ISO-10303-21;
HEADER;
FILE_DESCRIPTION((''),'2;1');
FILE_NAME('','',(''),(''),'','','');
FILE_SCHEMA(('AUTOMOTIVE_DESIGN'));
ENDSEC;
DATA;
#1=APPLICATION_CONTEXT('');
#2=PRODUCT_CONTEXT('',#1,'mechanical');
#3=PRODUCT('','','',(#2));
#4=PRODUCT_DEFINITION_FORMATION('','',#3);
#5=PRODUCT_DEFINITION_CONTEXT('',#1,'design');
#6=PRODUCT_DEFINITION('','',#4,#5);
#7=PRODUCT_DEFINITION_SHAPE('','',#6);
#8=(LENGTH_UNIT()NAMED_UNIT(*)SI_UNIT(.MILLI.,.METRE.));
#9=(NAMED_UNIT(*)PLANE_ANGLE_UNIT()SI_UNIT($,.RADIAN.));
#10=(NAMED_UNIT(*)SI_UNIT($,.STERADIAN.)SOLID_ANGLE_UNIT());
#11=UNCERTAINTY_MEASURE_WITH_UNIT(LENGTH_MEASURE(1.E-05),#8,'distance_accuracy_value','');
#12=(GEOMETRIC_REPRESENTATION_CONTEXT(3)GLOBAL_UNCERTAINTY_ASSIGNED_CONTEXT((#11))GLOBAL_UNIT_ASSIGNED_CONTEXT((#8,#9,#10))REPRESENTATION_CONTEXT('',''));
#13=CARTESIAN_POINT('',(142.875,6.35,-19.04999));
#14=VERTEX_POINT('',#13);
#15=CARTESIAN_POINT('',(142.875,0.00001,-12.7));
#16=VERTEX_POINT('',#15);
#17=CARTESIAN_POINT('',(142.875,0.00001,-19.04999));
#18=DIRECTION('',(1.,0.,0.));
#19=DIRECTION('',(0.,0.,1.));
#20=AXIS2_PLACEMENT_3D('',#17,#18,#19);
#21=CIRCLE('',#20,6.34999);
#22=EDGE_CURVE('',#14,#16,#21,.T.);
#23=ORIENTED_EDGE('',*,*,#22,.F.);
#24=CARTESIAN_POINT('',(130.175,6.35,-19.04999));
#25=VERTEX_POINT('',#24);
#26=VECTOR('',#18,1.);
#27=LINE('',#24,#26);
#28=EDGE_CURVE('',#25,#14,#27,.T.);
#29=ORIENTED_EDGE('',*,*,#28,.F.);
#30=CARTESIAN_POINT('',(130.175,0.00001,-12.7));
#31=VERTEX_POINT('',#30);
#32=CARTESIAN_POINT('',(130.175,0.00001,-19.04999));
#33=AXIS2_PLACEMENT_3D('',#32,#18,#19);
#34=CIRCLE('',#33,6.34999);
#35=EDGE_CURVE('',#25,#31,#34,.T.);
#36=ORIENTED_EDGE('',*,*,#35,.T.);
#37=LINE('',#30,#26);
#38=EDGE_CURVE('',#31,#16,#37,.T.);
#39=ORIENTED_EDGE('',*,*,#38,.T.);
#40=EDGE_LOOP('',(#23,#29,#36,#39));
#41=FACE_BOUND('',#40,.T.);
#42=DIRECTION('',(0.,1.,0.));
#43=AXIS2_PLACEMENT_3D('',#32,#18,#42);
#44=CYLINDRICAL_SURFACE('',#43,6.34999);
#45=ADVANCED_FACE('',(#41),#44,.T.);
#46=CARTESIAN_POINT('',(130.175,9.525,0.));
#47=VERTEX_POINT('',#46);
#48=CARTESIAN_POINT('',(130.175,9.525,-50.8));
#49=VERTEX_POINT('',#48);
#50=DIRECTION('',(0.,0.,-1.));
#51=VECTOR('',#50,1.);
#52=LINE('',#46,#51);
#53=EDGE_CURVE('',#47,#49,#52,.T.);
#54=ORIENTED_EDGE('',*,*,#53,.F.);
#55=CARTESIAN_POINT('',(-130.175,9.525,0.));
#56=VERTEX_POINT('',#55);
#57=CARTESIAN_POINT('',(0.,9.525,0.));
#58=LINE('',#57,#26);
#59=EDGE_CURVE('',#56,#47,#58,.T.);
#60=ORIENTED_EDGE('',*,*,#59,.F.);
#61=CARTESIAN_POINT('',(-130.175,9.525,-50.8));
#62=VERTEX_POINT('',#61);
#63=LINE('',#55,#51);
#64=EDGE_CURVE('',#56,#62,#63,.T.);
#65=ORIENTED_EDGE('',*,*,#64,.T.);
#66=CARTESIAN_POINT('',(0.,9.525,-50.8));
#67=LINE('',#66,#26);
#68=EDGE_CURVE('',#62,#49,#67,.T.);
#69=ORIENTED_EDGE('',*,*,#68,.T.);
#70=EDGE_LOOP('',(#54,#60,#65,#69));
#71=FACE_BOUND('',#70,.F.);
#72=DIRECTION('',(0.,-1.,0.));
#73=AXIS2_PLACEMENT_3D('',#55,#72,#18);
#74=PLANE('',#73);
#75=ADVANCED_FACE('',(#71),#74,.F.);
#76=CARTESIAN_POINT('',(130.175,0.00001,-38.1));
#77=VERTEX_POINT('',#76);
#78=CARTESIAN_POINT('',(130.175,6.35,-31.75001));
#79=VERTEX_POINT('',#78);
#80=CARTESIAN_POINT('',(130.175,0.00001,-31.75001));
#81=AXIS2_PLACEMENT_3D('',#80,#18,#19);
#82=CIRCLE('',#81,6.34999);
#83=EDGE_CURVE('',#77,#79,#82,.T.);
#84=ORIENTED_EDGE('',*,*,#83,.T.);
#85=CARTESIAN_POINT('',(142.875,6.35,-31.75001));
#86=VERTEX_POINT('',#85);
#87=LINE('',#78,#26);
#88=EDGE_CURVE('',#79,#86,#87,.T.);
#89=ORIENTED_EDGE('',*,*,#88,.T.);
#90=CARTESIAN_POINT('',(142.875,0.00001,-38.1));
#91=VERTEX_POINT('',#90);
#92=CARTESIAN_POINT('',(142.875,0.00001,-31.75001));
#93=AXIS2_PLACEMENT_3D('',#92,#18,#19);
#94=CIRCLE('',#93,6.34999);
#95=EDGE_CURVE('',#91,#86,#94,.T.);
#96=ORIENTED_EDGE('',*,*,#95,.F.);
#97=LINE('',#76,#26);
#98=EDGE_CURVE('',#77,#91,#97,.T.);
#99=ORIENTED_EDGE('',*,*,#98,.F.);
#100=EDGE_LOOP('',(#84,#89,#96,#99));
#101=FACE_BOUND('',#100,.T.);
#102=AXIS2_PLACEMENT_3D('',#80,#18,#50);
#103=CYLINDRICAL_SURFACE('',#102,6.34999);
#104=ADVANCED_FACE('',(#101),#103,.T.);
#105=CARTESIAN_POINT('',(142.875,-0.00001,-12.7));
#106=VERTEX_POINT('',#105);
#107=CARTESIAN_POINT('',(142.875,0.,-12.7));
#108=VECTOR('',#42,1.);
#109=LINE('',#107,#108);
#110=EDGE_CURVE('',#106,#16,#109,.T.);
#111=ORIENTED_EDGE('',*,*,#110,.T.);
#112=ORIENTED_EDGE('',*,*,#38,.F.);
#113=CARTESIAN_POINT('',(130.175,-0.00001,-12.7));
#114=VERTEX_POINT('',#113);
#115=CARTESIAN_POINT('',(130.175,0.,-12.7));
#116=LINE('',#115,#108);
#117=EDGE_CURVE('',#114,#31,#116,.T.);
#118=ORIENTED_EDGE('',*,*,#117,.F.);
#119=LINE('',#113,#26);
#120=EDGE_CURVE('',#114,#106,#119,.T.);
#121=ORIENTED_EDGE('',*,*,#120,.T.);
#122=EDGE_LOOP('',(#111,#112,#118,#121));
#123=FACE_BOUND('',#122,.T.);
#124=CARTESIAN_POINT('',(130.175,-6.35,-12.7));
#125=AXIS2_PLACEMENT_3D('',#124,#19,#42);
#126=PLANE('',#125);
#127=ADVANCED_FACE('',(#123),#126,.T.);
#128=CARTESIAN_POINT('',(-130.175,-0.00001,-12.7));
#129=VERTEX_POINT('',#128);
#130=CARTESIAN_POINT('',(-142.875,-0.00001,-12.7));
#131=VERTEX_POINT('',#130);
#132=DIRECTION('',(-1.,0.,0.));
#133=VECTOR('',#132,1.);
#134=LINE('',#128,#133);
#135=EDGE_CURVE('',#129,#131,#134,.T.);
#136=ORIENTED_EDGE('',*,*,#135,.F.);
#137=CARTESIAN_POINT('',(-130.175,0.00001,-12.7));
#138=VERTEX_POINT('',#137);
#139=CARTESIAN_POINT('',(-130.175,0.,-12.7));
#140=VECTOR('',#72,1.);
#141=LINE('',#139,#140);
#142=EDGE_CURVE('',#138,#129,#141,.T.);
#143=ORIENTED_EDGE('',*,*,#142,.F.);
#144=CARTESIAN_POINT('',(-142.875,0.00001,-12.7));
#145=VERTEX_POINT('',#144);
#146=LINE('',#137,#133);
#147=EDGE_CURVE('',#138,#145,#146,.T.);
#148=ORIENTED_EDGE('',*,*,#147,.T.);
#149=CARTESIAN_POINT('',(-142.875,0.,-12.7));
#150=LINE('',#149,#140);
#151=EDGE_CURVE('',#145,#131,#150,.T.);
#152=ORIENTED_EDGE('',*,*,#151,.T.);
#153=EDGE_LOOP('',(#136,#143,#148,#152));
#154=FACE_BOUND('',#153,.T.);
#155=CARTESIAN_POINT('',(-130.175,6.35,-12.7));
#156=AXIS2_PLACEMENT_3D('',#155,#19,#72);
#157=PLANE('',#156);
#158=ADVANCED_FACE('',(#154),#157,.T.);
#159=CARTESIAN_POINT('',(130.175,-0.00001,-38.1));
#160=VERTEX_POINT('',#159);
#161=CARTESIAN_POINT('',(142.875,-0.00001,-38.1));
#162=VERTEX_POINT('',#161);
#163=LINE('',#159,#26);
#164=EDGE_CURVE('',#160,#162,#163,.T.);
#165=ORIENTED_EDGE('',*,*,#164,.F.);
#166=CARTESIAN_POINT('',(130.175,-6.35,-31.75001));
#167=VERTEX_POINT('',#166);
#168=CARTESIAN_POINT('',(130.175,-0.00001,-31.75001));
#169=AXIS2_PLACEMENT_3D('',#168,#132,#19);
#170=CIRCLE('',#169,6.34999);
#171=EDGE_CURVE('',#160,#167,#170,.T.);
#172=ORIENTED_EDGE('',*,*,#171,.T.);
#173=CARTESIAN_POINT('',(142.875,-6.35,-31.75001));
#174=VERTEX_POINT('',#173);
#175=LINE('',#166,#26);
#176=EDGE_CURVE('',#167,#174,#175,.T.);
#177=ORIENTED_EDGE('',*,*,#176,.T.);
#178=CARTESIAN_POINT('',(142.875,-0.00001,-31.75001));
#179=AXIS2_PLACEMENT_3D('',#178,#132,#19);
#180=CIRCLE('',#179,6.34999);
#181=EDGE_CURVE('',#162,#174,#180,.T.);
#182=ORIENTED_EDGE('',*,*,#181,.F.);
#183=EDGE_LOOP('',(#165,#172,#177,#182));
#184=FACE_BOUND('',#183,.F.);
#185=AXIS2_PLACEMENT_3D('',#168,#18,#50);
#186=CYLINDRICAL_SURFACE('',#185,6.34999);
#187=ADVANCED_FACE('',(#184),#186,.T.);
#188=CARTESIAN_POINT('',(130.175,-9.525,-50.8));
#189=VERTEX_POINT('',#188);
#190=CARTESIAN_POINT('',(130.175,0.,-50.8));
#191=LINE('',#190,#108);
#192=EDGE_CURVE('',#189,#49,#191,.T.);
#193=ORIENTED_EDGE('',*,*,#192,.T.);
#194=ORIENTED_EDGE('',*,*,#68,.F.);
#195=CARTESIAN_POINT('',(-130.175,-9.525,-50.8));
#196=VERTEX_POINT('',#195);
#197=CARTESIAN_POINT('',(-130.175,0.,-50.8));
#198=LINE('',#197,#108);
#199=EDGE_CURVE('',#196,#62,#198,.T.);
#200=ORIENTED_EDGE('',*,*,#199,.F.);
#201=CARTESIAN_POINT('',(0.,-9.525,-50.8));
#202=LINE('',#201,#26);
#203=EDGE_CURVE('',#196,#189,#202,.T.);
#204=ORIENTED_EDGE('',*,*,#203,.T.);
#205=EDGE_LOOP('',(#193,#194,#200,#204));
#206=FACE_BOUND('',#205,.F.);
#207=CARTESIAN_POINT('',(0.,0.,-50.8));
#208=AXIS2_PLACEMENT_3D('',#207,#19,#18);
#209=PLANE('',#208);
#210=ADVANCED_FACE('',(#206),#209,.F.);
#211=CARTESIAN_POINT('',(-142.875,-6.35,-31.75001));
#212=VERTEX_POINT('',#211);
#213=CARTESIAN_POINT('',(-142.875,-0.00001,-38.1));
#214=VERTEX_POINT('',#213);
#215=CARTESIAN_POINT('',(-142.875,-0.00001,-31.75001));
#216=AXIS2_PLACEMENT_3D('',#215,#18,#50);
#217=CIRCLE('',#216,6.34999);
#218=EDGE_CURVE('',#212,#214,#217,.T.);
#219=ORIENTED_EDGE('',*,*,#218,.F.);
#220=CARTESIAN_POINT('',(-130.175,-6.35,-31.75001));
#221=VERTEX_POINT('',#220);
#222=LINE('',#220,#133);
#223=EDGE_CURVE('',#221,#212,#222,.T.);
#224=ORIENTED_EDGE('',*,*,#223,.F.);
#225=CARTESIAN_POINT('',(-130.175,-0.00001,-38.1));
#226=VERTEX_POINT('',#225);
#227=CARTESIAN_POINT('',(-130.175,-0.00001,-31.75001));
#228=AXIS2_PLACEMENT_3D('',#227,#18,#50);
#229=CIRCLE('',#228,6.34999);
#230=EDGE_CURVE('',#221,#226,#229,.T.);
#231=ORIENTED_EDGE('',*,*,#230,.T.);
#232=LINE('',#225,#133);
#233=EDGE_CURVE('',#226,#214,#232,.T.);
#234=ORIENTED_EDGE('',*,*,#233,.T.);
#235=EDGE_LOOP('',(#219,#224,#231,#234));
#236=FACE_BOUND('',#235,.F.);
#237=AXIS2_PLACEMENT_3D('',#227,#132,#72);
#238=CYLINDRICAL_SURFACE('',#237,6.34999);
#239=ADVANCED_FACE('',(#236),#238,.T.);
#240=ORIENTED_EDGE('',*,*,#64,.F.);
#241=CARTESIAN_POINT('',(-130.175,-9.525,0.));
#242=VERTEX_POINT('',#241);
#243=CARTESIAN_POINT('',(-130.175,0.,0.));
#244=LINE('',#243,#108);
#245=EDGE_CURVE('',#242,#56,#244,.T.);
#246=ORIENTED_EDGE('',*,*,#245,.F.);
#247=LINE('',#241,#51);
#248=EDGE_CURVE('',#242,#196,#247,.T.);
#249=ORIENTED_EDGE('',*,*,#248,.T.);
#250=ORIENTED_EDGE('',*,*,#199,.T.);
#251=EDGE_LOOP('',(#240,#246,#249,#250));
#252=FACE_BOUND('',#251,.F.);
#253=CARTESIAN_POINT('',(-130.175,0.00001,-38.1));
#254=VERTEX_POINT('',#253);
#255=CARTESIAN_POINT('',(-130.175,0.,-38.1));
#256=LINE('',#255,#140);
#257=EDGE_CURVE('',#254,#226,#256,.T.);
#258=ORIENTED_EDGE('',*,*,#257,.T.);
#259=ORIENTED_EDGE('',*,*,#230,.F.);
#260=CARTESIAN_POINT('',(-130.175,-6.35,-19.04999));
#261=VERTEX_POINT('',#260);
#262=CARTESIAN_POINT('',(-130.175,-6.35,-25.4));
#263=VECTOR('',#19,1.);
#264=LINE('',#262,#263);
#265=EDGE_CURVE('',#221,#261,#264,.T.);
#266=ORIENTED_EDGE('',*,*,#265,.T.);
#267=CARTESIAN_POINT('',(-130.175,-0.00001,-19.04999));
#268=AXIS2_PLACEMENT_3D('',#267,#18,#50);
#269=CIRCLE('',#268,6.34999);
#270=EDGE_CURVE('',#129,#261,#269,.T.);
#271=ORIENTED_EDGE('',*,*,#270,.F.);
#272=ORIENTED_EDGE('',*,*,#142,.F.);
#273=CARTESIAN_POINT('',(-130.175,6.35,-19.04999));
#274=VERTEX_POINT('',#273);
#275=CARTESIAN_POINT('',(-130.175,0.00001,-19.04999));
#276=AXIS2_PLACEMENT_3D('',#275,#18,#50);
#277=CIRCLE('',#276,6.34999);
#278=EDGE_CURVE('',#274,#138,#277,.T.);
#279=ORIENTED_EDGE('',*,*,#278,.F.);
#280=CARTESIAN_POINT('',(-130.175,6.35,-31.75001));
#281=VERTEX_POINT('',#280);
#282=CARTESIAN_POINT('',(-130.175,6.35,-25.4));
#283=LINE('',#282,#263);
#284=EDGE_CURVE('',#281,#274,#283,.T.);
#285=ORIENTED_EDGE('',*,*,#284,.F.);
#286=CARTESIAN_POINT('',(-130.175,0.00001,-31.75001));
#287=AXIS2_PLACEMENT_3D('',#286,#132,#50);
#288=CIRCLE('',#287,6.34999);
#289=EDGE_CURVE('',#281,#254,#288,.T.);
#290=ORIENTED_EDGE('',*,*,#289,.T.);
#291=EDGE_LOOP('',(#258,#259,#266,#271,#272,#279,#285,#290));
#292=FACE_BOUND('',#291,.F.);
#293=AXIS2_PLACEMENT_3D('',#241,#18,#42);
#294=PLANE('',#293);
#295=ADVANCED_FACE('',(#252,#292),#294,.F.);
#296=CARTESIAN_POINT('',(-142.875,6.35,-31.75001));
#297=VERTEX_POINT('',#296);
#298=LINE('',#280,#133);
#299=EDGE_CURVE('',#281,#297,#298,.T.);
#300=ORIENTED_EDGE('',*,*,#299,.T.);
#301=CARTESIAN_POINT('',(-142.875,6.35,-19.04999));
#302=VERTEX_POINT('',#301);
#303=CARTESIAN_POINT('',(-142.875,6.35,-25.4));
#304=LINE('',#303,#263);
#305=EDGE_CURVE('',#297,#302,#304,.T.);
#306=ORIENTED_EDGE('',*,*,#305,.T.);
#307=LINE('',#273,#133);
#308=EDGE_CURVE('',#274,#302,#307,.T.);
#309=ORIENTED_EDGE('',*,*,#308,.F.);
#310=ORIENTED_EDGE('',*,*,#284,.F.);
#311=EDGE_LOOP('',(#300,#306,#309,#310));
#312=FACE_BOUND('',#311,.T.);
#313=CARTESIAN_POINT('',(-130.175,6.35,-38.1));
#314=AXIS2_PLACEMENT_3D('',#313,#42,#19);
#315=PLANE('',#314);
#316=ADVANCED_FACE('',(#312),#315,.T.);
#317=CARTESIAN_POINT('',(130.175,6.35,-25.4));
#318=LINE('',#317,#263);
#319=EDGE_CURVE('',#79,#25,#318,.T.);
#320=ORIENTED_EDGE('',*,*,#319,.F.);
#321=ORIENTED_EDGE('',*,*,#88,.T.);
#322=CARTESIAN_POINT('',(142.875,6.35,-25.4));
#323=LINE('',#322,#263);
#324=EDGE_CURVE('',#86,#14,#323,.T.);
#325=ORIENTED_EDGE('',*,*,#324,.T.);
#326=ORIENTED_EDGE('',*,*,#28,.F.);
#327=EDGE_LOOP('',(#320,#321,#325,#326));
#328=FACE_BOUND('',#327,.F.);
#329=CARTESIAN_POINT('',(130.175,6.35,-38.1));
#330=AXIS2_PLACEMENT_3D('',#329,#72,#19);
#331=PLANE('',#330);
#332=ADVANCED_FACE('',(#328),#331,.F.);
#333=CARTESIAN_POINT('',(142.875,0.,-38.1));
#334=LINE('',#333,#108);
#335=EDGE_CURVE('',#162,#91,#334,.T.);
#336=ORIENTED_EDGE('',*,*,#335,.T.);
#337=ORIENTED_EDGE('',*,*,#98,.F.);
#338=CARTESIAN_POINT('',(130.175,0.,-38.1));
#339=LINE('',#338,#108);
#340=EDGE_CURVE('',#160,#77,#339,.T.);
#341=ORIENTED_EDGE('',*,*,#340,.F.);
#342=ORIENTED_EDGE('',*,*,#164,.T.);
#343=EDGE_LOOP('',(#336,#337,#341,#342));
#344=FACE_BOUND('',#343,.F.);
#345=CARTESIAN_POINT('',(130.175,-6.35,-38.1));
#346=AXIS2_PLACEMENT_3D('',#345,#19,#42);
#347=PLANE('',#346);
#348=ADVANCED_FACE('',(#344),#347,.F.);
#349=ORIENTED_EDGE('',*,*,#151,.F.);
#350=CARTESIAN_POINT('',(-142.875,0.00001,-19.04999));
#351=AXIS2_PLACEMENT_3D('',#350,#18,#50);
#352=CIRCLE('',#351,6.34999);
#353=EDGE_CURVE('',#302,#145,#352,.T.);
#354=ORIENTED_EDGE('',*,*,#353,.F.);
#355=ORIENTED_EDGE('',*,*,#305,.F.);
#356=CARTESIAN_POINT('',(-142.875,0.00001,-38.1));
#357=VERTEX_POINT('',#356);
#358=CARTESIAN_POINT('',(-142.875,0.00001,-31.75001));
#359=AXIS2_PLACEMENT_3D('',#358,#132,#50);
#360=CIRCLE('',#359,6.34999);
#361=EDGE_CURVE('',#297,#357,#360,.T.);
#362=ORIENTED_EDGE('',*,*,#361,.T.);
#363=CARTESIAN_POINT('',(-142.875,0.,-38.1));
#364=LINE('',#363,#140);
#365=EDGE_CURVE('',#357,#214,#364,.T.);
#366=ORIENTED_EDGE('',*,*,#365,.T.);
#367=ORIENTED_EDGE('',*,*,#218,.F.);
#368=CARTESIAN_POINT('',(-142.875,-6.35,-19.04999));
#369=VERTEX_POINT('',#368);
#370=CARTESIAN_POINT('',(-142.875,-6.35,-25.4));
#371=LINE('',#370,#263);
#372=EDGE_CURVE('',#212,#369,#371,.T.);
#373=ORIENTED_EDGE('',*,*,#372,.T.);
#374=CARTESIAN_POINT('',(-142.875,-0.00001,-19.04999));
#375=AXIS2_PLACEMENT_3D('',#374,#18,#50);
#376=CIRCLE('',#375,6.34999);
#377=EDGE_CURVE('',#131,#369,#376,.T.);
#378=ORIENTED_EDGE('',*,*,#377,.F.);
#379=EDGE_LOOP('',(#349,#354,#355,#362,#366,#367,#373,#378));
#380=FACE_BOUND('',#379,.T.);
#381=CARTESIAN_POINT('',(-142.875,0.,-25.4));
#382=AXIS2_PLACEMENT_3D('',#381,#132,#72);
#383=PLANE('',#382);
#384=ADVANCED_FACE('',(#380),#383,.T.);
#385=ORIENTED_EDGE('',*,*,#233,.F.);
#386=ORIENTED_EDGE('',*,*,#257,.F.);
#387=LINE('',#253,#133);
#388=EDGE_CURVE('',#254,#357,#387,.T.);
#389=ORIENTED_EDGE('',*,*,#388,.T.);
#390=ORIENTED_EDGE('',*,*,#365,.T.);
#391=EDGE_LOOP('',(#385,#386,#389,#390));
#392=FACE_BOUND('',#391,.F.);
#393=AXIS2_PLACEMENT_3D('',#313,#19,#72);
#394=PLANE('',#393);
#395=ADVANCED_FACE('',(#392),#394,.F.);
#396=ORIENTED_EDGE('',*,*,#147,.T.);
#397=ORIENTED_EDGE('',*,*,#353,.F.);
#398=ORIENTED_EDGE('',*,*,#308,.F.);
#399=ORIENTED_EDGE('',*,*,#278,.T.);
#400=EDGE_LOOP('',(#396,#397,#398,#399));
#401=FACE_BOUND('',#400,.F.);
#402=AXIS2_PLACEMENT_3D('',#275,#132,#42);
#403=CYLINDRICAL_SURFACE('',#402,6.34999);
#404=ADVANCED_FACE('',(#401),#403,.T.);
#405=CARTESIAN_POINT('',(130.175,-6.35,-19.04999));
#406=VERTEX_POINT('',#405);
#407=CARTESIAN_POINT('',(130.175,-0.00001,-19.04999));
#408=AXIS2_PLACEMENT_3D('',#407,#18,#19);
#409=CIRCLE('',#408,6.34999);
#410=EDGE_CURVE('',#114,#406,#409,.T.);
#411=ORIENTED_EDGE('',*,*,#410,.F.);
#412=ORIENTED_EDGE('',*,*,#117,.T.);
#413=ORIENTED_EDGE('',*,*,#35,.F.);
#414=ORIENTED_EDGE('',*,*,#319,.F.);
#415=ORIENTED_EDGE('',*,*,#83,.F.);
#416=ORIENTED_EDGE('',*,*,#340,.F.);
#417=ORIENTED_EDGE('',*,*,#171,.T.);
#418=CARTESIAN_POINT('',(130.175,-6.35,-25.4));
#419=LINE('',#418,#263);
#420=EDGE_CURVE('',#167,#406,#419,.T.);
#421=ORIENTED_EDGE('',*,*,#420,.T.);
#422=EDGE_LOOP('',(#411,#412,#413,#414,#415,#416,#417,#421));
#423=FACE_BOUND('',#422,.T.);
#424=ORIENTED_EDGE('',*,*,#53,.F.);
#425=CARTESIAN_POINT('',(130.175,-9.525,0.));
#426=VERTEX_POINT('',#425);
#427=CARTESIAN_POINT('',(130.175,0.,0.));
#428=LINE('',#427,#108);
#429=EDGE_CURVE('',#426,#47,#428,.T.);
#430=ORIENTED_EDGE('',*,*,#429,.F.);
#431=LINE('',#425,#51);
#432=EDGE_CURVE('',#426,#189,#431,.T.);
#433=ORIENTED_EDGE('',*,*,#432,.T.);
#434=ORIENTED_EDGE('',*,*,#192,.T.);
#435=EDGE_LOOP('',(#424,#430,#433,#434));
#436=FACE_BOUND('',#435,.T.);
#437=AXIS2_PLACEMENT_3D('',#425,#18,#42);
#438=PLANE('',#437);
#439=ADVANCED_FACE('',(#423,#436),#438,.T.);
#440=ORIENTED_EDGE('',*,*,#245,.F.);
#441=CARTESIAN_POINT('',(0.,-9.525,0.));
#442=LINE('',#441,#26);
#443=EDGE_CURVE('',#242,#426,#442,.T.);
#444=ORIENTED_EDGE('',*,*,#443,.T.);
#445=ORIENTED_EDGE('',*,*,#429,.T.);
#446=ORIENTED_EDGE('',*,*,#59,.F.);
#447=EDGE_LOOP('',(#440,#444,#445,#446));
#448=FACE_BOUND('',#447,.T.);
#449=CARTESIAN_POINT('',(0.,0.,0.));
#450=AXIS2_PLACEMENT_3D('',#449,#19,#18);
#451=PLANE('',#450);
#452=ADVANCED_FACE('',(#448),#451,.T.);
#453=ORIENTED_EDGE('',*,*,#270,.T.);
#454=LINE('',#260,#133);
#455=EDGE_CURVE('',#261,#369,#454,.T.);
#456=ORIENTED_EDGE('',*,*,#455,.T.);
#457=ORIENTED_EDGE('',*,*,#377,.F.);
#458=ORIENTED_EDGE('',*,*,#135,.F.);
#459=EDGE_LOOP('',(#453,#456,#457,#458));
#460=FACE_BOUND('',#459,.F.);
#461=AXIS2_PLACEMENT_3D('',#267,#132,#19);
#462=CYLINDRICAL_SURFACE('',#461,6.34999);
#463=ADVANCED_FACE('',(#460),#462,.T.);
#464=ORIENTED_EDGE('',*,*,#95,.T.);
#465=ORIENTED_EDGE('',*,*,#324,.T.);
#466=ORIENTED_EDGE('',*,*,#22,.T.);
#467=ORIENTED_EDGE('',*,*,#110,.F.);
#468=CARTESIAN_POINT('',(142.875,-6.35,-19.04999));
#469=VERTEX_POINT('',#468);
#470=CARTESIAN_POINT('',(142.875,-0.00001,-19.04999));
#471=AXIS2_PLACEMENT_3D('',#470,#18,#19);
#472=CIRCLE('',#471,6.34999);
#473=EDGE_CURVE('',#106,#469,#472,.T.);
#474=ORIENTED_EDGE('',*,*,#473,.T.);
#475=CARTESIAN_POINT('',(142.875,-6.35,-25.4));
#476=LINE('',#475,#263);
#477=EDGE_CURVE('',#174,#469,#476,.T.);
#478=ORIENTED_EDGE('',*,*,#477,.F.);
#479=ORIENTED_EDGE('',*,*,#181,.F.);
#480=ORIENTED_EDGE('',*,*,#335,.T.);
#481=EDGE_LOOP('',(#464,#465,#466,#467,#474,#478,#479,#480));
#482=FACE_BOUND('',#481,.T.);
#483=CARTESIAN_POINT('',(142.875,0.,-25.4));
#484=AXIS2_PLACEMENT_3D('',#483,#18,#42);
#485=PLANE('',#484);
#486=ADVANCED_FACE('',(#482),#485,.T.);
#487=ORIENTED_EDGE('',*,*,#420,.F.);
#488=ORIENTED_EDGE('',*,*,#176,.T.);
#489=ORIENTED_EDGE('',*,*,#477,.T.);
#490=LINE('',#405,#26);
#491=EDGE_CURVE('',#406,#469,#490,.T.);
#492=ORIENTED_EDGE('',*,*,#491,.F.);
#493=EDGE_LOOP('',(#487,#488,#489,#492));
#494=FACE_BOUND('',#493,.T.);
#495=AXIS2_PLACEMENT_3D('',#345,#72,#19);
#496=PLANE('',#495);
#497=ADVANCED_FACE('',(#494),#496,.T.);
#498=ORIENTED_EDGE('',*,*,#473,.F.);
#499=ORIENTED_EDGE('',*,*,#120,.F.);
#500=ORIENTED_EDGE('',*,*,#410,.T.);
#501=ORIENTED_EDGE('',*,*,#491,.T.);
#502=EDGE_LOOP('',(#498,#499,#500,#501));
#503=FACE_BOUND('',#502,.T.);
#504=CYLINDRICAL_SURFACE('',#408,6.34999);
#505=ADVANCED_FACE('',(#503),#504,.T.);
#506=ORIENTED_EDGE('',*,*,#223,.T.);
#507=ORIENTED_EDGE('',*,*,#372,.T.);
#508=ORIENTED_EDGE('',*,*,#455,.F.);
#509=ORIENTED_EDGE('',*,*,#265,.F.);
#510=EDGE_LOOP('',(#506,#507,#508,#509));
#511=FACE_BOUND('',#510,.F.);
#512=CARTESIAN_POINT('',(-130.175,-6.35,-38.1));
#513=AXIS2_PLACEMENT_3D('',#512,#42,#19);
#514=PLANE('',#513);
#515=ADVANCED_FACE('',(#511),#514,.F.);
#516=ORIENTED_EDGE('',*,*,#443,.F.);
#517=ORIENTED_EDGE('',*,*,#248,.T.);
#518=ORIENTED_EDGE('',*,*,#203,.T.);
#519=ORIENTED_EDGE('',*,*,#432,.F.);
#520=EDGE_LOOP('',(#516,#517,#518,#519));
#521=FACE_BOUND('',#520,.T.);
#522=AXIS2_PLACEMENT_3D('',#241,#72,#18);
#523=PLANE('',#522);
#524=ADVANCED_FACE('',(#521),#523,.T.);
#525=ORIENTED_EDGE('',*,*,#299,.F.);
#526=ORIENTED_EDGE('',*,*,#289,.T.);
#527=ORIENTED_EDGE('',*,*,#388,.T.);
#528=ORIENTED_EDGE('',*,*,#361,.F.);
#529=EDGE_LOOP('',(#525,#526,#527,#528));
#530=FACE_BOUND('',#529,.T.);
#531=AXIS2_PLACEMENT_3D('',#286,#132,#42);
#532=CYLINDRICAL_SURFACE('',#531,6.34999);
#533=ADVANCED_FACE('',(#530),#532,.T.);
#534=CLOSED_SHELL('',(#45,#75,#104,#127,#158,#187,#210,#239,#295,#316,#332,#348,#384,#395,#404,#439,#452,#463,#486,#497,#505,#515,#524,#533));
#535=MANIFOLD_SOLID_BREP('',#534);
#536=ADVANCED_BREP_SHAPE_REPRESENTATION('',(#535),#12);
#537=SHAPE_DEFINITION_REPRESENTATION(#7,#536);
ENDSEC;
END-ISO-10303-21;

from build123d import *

# Parameters (mm, degrees)
F0_W     = 260.35
F0_H     = 19.05
F1_DEPTH = 50.8
F2_W     = 12.7
F2_H     = 25.4
F3_DEPTH = 12.7
F4_R     = 6.34999
F5_W     = 12.7
F5_H     = 25.4
F6_DEPTH = 12.7
F7_R     = 6.34999


# Not quite as in the source:
# - a fillet or chamfer is up to 0.001 mm smaller than in the source, because OpenCascade refuses the exact size


with BuildPart() as f1:
    # F0 (on Top) → F1 (new body)
    with BuildSketch(Plane.XY):
        Rectangle(F0_W, F0_H)
    extrude(amount=-F1_DEPTH)

    # F2 (on face) → F3 (join)
    with BuildSketch(Plane(origin=(-130.175, 0, 0), x_dir=(0, -1, 0), z_dir=(-1, 0, 0))):
        with Locations((0, -25.4)):
            Rectangle(F2_W, F2_H)
    extrude(amount=F3_DEPTH)

    # F4 (radius 6.35 in the source; OpenCascade refuses exactly that, so slightly less here)
    f4_edges = [f1.edges().sort_by_distance(p)[0] for p in [
        (-136.525, 6.35, -12.7),
        (-136.525, -6.35, -12.7),
        (-136.525, -6.35, -38.1),
        (-136.525, 6.35, -38.1),
    ]]
    fillet(f4_edges, radius=F4_R)

    # F5 (on face) → F6 (join)
    with BuildSketch(Plane.YZ.offset(130.175)):
        with Locations((0, -25.4)):
            Rectangle(F5_W, F5_H)
    extrude(amount=F6_DEPTH)

    # F7 (radius 6.35 in the source; OpenCascade refuses exactly that, so slightly less here)
    f7_edges = [f1.edges().sort_by_distance(p)[0] for p in [
        (136.525, -6.35, -12.7),
        (136.525, 6.35, -12.7),
        (136.525, 6.35, -38.1),
        (136.525, -6.35, -38.1),
    ]]
    fillet(f7_edges, radius=F7_R)


solid = f1.part
